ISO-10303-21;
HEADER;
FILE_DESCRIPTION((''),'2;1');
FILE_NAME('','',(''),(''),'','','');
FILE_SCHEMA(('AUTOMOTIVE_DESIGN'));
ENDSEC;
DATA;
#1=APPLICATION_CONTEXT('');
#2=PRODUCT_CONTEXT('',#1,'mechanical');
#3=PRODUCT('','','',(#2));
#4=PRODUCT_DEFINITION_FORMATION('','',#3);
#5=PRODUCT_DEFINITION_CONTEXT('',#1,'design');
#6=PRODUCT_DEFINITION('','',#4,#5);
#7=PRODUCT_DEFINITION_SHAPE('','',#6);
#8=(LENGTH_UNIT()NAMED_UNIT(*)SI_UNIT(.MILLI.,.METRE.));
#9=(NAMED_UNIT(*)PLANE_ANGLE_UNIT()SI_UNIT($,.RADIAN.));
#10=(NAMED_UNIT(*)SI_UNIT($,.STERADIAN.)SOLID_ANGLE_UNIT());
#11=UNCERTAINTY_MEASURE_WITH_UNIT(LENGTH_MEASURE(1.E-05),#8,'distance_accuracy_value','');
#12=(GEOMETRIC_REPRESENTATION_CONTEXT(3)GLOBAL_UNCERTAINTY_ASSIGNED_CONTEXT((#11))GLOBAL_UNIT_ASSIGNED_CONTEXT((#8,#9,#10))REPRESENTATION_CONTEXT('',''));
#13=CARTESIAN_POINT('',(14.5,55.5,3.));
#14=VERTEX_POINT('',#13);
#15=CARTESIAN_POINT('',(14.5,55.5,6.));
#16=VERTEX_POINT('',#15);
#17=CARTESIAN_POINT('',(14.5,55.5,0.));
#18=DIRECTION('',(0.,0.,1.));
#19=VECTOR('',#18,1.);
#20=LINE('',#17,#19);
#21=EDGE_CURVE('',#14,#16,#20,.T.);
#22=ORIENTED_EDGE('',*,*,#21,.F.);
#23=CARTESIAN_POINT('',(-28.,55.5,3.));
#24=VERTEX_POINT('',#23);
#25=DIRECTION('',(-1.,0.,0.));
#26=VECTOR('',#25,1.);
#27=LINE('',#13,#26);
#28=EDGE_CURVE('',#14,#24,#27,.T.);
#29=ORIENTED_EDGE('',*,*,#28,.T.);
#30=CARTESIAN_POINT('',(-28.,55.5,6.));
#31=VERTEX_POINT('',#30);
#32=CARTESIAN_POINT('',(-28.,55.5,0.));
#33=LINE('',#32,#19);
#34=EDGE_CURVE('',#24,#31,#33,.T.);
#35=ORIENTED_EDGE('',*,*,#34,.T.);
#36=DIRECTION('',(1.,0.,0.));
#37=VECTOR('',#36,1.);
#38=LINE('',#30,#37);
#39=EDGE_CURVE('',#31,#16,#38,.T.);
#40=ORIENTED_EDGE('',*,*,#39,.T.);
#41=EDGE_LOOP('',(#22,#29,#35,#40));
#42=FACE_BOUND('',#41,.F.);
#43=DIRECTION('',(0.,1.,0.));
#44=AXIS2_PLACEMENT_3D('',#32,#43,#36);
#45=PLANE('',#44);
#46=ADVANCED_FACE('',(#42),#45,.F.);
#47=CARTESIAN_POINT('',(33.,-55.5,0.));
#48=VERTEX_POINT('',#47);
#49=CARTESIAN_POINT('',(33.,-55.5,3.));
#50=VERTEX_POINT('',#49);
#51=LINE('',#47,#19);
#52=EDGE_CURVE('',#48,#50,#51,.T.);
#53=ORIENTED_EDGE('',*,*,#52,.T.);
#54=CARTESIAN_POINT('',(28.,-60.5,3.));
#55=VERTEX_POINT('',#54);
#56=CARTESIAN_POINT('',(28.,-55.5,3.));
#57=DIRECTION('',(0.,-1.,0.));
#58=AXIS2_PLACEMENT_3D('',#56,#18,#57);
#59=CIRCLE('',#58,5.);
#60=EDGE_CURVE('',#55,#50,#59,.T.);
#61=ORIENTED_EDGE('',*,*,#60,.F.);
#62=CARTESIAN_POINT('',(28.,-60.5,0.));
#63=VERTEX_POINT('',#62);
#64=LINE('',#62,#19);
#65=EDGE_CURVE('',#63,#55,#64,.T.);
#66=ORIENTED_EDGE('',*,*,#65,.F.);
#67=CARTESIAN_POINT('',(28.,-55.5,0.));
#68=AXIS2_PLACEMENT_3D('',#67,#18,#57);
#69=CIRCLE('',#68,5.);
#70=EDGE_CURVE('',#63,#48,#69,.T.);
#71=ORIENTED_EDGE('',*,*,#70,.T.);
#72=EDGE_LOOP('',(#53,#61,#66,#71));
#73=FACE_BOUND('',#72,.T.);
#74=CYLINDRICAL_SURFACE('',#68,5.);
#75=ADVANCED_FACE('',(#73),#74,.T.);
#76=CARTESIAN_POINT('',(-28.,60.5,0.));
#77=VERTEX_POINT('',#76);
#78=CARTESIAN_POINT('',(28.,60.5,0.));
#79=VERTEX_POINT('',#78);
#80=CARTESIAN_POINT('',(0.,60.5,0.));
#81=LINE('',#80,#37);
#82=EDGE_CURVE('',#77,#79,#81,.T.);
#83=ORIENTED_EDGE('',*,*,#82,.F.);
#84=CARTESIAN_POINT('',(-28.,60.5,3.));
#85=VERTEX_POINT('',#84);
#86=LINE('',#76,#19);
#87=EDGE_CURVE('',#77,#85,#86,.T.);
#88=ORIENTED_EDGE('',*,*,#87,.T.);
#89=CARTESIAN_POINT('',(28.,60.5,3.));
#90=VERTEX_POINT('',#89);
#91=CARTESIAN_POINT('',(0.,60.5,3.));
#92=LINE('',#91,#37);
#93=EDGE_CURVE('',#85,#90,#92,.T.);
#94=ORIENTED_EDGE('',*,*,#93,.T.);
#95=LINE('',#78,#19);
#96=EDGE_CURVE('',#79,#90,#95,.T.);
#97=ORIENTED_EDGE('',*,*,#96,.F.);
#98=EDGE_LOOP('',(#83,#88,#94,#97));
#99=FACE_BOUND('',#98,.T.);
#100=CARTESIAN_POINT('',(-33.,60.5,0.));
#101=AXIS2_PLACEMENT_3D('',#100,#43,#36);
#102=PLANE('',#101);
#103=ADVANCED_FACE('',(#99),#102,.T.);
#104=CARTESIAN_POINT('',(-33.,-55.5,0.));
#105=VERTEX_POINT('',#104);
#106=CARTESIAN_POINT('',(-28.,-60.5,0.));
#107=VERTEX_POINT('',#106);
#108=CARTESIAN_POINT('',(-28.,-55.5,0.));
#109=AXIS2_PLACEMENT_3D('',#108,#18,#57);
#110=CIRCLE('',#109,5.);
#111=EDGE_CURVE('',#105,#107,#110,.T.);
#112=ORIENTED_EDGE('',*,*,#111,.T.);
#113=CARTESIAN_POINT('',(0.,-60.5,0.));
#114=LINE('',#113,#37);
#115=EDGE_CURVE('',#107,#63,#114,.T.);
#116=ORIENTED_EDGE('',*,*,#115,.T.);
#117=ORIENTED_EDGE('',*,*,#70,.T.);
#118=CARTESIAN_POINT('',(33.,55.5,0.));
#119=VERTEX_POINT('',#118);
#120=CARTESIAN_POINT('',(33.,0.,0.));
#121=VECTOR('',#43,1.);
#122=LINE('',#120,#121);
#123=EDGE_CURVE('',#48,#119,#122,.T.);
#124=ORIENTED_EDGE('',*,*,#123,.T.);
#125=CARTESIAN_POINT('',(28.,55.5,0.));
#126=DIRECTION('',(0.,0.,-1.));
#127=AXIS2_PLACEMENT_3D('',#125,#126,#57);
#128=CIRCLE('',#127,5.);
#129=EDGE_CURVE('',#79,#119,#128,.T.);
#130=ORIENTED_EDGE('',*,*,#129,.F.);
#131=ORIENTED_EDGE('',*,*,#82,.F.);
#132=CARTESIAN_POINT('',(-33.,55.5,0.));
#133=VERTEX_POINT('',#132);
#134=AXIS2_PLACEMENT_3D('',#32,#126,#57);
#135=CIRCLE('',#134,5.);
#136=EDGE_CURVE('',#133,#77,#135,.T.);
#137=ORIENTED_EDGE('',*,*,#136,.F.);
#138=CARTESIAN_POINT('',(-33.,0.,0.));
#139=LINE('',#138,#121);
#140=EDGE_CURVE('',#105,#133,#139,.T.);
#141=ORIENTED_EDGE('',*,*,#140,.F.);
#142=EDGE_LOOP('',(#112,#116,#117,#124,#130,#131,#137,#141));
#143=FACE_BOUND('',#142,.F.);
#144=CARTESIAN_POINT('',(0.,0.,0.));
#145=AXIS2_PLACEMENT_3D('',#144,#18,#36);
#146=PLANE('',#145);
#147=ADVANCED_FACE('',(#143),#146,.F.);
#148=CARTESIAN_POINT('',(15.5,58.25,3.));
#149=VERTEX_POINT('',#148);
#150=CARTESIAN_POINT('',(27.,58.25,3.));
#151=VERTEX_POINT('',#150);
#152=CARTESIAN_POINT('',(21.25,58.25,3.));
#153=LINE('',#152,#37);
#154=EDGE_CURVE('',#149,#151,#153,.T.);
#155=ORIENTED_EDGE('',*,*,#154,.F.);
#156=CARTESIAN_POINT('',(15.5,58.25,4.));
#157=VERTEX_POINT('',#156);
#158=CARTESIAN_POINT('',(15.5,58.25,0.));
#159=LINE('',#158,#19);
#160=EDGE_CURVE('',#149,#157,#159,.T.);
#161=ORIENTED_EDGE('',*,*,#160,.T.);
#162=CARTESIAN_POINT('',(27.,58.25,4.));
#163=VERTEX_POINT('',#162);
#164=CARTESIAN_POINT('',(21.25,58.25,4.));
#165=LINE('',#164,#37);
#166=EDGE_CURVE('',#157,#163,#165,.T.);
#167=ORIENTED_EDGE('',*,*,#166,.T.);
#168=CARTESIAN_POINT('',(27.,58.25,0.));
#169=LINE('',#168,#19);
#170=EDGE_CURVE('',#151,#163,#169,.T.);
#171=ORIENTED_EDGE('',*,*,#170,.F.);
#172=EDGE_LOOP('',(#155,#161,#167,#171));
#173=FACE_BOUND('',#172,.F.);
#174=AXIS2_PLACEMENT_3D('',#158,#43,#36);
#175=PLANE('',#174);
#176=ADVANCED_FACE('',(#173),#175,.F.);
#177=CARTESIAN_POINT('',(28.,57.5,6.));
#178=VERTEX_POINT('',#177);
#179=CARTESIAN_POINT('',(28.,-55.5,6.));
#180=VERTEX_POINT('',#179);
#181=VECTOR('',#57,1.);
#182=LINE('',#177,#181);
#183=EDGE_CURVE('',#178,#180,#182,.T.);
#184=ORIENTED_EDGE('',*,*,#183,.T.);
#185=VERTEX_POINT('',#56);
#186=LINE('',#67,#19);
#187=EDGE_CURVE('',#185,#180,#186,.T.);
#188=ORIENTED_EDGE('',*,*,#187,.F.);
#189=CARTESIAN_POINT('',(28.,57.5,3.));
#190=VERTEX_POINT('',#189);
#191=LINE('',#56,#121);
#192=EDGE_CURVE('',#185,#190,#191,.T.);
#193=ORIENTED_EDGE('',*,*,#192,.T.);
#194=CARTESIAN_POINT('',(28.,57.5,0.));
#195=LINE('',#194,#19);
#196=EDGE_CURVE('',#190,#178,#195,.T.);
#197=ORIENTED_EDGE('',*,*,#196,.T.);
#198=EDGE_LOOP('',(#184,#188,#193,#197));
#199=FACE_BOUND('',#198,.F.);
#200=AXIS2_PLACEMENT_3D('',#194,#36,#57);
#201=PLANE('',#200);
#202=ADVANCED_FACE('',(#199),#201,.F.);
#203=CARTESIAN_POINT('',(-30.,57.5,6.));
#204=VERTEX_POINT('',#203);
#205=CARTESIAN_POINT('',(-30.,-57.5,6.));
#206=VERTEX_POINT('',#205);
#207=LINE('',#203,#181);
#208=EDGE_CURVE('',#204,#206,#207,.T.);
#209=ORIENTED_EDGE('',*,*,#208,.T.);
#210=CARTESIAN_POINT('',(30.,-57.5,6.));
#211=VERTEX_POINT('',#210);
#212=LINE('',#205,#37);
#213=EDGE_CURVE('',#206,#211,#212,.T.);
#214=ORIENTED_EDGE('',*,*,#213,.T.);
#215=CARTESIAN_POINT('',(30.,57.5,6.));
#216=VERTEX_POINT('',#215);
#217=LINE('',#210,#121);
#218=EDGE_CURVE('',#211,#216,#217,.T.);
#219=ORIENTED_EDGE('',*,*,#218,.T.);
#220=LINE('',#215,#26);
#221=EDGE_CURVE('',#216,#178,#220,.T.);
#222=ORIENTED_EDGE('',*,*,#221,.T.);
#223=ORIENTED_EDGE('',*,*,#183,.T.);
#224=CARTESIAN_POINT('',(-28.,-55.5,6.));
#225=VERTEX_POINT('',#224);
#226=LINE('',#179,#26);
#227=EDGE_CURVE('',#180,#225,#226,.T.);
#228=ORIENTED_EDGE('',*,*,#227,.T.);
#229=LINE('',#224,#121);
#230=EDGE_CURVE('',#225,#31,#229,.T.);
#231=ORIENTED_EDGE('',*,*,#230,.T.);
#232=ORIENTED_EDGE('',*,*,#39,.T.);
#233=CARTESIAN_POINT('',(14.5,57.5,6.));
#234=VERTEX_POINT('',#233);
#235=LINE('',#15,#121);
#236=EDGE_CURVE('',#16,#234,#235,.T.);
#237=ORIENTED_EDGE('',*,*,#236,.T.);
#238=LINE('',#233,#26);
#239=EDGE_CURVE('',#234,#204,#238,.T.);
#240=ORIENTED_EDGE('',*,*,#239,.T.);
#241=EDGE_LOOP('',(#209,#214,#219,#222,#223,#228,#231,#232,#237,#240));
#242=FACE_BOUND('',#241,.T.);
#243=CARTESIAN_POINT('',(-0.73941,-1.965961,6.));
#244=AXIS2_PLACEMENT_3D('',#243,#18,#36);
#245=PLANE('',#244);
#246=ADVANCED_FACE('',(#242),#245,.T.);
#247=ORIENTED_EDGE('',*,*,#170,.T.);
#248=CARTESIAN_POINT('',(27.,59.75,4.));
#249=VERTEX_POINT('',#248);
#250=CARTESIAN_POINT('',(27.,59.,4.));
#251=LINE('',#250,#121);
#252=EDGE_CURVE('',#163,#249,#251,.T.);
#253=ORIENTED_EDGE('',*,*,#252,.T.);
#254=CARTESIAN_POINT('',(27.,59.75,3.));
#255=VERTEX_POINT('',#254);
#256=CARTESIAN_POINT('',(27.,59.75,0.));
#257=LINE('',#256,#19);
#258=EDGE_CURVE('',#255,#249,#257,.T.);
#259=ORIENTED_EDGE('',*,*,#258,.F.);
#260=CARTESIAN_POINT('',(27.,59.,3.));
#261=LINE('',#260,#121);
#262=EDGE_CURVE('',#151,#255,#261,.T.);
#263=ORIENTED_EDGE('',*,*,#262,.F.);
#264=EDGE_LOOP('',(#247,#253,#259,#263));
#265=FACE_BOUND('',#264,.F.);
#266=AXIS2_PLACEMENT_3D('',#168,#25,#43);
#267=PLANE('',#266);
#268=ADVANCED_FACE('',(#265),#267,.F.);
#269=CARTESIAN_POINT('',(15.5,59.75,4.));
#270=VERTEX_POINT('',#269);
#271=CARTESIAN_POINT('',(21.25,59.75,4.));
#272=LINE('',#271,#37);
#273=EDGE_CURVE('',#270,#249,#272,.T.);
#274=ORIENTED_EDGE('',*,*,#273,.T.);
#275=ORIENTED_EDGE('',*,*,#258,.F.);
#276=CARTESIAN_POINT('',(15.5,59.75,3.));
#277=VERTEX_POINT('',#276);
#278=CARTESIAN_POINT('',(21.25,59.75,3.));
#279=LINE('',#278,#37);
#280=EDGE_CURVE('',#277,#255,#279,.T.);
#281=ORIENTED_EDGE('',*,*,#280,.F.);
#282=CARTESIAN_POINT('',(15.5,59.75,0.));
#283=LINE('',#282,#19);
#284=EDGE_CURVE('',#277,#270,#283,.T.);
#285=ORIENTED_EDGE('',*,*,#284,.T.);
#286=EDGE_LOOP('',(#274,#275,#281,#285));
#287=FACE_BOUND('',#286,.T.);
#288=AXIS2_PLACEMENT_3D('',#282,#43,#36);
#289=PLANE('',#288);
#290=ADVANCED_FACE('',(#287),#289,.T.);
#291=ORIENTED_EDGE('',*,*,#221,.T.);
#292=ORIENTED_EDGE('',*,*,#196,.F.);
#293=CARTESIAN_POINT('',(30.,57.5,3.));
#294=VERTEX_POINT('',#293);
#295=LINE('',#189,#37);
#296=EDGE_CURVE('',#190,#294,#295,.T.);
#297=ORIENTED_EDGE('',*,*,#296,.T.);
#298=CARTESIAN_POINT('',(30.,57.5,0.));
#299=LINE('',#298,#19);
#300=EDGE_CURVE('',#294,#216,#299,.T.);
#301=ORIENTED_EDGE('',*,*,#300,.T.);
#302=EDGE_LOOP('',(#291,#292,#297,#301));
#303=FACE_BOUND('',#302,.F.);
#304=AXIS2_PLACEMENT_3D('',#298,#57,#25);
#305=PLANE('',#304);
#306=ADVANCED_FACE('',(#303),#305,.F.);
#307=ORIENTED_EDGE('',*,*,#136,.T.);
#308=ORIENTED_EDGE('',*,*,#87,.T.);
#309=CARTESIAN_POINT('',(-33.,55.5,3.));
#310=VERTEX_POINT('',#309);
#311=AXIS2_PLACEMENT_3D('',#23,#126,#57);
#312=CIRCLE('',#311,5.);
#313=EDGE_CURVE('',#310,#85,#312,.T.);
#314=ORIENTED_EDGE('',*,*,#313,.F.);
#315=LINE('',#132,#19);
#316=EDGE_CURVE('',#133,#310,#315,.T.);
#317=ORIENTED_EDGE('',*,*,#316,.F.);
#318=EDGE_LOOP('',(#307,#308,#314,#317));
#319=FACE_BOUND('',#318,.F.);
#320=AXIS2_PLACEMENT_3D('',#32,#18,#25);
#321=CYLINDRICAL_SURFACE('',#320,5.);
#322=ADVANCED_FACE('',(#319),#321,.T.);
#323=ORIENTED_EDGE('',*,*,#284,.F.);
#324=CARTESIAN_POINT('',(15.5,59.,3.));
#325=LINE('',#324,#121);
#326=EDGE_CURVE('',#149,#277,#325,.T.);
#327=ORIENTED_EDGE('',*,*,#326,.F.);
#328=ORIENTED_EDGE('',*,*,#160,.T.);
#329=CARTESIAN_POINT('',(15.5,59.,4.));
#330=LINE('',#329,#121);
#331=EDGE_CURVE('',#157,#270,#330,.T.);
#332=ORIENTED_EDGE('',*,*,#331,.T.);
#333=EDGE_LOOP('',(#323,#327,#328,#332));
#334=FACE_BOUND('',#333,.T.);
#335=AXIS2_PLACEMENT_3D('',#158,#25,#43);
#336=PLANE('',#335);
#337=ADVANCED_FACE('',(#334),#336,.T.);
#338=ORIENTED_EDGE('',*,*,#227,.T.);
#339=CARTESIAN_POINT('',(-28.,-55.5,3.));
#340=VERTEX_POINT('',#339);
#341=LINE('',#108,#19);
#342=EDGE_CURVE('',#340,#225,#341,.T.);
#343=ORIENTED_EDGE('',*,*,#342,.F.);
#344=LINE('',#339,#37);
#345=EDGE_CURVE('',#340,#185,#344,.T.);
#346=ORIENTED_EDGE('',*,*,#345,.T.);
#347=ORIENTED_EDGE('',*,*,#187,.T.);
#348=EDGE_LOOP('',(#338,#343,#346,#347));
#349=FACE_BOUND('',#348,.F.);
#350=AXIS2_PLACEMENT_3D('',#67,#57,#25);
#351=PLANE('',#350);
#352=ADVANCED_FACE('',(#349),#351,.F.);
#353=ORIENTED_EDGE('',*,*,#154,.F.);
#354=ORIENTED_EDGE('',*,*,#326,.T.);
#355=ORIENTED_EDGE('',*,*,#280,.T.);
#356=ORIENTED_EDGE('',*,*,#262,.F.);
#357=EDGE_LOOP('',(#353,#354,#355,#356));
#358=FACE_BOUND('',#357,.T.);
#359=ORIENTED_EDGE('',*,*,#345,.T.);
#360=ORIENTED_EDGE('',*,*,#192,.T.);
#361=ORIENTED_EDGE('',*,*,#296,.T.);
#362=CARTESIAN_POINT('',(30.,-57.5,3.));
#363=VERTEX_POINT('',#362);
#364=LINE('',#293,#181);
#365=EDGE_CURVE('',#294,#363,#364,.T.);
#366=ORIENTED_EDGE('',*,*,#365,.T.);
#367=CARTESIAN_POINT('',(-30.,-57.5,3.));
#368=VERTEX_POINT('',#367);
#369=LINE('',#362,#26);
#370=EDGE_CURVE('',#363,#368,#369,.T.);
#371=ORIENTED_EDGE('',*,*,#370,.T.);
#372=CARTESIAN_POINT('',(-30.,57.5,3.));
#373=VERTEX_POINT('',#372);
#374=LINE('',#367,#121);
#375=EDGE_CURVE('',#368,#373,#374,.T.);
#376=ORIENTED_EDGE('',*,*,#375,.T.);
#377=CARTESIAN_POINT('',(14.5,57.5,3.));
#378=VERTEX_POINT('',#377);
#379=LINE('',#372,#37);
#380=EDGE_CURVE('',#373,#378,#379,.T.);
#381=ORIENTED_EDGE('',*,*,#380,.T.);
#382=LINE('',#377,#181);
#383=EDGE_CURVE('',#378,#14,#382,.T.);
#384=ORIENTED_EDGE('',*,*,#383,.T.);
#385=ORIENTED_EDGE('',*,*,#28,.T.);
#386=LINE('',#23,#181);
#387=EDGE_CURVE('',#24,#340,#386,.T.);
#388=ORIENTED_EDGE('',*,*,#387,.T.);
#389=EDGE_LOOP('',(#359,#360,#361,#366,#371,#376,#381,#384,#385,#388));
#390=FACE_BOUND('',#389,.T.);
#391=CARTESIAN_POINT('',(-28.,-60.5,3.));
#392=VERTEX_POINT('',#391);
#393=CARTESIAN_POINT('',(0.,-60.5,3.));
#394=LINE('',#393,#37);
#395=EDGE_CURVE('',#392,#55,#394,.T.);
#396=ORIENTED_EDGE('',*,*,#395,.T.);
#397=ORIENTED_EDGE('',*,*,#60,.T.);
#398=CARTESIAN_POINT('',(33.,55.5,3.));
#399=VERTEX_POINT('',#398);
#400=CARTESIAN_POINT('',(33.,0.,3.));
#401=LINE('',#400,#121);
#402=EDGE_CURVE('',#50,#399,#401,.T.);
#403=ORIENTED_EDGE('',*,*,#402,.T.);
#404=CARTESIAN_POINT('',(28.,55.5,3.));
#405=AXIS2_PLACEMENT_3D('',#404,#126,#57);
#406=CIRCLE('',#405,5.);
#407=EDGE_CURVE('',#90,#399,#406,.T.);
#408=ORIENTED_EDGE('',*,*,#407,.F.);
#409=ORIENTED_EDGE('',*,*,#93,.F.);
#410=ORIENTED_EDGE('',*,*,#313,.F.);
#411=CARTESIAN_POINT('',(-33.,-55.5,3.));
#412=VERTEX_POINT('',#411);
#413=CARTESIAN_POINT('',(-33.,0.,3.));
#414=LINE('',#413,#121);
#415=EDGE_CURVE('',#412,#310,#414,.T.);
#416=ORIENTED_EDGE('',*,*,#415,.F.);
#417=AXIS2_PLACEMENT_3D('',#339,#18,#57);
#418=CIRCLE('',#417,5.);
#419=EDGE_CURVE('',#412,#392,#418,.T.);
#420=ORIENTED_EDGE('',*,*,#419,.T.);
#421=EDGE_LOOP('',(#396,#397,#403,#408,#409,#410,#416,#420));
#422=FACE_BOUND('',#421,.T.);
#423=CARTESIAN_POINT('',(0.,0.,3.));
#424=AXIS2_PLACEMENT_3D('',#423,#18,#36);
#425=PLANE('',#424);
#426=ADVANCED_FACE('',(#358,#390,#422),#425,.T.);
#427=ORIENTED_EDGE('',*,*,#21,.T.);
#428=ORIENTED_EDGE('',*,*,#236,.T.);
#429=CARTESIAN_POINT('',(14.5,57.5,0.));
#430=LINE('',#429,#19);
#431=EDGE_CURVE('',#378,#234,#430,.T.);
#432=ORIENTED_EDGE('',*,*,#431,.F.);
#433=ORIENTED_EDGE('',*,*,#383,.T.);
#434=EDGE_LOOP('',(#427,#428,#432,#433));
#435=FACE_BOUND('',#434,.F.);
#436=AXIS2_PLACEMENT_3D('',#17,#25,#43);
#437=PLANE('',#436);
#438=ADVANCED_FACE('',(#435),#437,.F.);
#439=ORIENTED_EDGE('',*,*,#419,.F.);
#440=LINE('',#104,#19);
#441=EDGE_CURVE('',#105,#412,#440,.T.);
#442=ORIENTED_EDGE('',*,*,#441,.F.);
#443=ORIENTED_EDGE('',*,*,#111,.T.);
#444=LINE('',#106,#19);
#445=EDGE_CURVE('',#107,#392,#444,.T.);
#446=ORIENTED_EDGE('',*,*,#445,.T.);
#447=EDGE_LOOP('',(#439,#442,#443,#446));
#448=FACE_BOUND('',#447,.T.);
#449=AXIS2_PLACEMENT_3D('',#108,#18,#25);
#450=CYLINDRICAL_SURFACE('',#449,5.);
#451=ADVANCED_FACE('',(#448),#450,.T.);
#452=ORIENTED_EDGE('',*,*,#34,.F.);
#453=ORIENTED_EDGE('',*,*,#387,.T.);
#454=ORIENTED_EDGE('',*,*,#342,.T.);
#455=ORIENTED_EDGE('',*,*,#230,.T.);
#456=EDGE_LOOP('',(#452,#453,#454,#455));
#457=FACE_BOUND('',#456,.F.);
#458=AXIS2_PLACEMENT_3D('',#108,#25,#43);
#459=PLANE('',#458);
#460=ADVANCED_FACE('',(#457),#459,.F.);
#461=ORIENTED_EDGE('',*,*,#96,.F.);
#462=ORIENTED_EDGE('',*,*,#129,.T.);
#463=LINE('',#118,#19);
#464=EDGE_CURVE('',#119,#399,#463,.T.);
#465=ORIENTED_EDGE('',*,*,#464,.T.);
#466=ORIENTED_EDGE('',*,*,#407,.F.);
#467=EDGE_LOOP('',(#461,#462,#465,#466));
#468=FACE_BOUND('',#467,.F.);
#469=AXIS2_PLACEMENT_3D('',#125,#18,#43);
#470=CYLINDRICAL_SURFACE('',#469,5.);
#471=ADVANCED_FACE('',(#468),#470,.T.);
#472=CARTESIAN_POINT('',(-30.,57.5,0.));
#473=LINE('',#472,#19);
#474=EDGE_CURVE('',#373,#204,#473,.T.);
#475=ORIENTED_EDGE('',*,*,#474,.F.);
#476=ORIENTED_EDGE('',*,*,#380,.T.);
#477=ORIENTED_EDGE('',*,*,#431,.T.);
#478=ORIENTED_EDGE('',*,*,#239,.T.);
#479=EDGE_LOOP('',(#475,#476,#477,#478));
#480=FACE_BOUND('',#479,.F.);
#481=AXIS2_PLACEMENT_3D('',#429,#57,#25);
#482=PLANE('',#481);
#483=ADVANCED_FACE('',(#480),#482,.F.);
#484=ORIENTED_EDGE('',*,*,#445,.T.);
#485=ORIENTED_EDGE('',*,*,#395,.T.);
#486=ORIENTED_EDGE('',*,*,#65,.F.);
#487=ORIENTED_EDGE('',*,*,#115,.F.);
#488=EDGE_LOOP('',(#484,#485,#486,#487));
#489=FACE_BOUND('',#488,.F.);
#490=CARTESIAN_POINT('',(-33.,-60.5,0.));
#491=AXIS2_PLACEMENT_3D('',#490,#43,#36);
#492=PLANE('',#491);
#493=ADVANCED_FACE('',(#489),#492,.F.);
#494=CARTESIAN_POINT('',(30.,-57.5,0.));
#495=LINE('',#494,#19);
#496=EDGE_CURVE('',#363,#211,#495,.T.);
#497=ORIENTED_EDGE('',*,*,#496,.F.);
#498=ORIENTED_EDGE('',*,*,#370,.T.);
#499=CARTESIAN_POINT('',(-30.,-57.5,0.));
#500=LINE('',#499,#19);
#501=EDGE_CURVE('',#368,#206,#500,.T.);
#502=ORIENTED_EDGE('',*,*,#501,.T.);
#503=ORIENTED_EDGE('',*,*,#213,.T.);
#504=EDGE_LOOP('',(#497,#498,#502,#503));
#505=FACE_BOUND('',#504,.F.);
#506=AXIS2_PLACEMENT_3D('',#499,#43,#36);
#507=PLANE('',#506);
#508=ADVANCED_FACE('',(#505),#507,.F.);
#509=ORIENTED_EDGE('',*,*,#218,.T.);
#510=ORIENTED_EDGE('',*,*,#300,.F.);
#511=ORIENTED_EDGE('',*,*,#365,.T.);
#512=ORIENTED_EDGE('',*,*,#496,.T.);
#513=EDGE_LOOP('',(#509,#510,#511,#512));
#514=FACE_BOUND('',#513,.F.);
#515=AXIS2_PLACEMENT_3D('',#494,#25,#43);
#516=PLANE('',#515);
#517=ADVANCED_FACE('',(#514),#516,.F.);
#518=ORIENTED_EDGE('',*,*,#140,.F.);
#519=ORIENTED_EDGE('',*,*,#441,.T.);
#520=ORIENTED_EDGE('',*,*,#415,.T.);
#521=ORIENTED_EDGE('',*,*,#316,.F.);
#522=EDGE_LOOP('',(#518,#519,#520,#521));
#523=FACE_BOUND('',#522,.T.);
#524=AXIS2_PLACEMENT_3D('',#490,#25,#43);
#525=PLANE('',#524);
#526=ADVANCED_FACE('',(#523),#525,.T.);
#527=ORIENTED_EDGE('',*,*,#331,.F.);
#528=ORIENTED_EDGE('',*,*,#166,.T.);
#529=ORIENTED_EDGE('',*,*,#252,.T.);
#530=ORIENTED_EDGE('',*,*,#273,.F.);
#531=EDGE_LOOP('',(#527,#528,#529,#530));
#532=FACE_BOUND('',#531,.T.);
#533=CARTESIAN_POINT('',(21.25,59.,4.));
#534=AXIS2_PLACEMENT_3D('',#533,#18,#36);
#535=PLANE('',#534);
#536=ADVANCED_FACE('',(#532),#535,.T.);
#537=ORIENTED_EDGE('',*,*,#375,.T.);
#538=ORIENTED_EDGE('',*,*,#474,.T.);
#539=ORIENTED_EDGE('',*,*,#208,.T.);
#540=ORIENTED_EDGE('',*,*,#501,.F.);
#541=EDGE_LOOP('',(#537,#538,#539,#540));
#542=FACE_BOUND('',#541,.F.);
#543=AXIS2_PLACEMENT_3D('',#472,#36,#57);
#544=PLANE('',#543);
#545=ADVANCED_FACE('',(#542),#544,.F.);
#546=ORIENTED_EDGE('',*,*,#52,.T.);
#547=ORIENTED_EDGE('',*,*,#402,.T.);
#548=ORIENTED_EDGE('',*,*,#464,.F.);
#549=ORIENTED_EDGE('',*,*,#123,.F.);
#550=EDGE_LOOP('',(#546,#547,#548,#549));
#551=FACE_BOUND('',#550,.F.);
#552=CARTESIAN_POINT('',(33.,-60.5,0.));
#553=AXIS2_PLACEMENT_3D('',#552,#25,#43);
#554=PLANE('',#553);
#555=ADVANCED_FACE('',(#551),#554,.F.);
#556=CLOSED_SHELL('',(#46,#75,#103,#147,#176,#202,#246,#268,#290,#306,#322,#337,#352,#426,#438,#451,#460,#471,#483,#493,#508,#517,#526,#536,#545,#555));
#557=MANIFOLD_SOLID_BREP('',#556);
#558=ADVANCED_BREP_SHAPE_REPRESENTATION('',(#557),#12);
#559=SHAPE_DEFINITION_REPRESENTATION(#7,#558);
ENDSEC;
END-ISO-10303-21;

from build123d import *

# Parameters (mm, degrees)
F1_DEPTH = 6
F0_W     = 66
F0_H     = 121
F0_W_2   = 11.5
F0_H_2   = 1.5
F2_DEPTH = 3
F3_R     = 5
F4_DEPTH = 4


# Not quite as in the source:
# - a feature names something its author has since deleted; it is built from what else it names


with BuildPart() as f1:
    # F0 (on Top) → F1 (new body)
    with BuildSketch(Plane.XY):
        Polygon((30, -57.5), (30, 57.5), (28, 57.5), (28, -55.5), (-28, -55.5), (-28, 55.5), (14.5, 55.5), (14.5, 57.5), (-30, 57.5), (-30, -57.5), align=None)
    extrude(amount=F1_DEPTH)

    # F0 (on Top) → F2 (join)
    with BuildSketch(Plane.XY):
        Rectangle(F0_W, F0_H)
        Polygon((28, 57.5), (30, 57.5), (30, -57.5), (-30, -57.5), (-30, 57.5), (14.5, 57.5), (14.5, 55.5), (-28, 55.5), (-28, -55.5), (28, -55.5), align=None, mode=Mode.SUBTRACT)
        with Locations((21.25, 59)):
            Rectangle(F0_W_2, F0_H_2, mode=Mode.SUBTRACT)
    extrude(amount=F2_DEPTH)

    # F3
    f3_edges = [f1.edges().sort_by_distance(p)[0] for p in [
        (-33, 60.5, 1.5),
        (-33, -60.5, 1.5),
        (33, -60.5, 1.5),
        (33, 60.5, 1.5),
    ]]
    fillet(f3_edges, radius=F3_R)

    # F0 (on Top) → F4 (join)
    with BuildSketch(Plane.XY):
        with Locations((21.25, 59)):
            Rectangle(F0_W_2, F0_H_2)
    extrude(amount=F4_DEPTH)


solid = f1.part
